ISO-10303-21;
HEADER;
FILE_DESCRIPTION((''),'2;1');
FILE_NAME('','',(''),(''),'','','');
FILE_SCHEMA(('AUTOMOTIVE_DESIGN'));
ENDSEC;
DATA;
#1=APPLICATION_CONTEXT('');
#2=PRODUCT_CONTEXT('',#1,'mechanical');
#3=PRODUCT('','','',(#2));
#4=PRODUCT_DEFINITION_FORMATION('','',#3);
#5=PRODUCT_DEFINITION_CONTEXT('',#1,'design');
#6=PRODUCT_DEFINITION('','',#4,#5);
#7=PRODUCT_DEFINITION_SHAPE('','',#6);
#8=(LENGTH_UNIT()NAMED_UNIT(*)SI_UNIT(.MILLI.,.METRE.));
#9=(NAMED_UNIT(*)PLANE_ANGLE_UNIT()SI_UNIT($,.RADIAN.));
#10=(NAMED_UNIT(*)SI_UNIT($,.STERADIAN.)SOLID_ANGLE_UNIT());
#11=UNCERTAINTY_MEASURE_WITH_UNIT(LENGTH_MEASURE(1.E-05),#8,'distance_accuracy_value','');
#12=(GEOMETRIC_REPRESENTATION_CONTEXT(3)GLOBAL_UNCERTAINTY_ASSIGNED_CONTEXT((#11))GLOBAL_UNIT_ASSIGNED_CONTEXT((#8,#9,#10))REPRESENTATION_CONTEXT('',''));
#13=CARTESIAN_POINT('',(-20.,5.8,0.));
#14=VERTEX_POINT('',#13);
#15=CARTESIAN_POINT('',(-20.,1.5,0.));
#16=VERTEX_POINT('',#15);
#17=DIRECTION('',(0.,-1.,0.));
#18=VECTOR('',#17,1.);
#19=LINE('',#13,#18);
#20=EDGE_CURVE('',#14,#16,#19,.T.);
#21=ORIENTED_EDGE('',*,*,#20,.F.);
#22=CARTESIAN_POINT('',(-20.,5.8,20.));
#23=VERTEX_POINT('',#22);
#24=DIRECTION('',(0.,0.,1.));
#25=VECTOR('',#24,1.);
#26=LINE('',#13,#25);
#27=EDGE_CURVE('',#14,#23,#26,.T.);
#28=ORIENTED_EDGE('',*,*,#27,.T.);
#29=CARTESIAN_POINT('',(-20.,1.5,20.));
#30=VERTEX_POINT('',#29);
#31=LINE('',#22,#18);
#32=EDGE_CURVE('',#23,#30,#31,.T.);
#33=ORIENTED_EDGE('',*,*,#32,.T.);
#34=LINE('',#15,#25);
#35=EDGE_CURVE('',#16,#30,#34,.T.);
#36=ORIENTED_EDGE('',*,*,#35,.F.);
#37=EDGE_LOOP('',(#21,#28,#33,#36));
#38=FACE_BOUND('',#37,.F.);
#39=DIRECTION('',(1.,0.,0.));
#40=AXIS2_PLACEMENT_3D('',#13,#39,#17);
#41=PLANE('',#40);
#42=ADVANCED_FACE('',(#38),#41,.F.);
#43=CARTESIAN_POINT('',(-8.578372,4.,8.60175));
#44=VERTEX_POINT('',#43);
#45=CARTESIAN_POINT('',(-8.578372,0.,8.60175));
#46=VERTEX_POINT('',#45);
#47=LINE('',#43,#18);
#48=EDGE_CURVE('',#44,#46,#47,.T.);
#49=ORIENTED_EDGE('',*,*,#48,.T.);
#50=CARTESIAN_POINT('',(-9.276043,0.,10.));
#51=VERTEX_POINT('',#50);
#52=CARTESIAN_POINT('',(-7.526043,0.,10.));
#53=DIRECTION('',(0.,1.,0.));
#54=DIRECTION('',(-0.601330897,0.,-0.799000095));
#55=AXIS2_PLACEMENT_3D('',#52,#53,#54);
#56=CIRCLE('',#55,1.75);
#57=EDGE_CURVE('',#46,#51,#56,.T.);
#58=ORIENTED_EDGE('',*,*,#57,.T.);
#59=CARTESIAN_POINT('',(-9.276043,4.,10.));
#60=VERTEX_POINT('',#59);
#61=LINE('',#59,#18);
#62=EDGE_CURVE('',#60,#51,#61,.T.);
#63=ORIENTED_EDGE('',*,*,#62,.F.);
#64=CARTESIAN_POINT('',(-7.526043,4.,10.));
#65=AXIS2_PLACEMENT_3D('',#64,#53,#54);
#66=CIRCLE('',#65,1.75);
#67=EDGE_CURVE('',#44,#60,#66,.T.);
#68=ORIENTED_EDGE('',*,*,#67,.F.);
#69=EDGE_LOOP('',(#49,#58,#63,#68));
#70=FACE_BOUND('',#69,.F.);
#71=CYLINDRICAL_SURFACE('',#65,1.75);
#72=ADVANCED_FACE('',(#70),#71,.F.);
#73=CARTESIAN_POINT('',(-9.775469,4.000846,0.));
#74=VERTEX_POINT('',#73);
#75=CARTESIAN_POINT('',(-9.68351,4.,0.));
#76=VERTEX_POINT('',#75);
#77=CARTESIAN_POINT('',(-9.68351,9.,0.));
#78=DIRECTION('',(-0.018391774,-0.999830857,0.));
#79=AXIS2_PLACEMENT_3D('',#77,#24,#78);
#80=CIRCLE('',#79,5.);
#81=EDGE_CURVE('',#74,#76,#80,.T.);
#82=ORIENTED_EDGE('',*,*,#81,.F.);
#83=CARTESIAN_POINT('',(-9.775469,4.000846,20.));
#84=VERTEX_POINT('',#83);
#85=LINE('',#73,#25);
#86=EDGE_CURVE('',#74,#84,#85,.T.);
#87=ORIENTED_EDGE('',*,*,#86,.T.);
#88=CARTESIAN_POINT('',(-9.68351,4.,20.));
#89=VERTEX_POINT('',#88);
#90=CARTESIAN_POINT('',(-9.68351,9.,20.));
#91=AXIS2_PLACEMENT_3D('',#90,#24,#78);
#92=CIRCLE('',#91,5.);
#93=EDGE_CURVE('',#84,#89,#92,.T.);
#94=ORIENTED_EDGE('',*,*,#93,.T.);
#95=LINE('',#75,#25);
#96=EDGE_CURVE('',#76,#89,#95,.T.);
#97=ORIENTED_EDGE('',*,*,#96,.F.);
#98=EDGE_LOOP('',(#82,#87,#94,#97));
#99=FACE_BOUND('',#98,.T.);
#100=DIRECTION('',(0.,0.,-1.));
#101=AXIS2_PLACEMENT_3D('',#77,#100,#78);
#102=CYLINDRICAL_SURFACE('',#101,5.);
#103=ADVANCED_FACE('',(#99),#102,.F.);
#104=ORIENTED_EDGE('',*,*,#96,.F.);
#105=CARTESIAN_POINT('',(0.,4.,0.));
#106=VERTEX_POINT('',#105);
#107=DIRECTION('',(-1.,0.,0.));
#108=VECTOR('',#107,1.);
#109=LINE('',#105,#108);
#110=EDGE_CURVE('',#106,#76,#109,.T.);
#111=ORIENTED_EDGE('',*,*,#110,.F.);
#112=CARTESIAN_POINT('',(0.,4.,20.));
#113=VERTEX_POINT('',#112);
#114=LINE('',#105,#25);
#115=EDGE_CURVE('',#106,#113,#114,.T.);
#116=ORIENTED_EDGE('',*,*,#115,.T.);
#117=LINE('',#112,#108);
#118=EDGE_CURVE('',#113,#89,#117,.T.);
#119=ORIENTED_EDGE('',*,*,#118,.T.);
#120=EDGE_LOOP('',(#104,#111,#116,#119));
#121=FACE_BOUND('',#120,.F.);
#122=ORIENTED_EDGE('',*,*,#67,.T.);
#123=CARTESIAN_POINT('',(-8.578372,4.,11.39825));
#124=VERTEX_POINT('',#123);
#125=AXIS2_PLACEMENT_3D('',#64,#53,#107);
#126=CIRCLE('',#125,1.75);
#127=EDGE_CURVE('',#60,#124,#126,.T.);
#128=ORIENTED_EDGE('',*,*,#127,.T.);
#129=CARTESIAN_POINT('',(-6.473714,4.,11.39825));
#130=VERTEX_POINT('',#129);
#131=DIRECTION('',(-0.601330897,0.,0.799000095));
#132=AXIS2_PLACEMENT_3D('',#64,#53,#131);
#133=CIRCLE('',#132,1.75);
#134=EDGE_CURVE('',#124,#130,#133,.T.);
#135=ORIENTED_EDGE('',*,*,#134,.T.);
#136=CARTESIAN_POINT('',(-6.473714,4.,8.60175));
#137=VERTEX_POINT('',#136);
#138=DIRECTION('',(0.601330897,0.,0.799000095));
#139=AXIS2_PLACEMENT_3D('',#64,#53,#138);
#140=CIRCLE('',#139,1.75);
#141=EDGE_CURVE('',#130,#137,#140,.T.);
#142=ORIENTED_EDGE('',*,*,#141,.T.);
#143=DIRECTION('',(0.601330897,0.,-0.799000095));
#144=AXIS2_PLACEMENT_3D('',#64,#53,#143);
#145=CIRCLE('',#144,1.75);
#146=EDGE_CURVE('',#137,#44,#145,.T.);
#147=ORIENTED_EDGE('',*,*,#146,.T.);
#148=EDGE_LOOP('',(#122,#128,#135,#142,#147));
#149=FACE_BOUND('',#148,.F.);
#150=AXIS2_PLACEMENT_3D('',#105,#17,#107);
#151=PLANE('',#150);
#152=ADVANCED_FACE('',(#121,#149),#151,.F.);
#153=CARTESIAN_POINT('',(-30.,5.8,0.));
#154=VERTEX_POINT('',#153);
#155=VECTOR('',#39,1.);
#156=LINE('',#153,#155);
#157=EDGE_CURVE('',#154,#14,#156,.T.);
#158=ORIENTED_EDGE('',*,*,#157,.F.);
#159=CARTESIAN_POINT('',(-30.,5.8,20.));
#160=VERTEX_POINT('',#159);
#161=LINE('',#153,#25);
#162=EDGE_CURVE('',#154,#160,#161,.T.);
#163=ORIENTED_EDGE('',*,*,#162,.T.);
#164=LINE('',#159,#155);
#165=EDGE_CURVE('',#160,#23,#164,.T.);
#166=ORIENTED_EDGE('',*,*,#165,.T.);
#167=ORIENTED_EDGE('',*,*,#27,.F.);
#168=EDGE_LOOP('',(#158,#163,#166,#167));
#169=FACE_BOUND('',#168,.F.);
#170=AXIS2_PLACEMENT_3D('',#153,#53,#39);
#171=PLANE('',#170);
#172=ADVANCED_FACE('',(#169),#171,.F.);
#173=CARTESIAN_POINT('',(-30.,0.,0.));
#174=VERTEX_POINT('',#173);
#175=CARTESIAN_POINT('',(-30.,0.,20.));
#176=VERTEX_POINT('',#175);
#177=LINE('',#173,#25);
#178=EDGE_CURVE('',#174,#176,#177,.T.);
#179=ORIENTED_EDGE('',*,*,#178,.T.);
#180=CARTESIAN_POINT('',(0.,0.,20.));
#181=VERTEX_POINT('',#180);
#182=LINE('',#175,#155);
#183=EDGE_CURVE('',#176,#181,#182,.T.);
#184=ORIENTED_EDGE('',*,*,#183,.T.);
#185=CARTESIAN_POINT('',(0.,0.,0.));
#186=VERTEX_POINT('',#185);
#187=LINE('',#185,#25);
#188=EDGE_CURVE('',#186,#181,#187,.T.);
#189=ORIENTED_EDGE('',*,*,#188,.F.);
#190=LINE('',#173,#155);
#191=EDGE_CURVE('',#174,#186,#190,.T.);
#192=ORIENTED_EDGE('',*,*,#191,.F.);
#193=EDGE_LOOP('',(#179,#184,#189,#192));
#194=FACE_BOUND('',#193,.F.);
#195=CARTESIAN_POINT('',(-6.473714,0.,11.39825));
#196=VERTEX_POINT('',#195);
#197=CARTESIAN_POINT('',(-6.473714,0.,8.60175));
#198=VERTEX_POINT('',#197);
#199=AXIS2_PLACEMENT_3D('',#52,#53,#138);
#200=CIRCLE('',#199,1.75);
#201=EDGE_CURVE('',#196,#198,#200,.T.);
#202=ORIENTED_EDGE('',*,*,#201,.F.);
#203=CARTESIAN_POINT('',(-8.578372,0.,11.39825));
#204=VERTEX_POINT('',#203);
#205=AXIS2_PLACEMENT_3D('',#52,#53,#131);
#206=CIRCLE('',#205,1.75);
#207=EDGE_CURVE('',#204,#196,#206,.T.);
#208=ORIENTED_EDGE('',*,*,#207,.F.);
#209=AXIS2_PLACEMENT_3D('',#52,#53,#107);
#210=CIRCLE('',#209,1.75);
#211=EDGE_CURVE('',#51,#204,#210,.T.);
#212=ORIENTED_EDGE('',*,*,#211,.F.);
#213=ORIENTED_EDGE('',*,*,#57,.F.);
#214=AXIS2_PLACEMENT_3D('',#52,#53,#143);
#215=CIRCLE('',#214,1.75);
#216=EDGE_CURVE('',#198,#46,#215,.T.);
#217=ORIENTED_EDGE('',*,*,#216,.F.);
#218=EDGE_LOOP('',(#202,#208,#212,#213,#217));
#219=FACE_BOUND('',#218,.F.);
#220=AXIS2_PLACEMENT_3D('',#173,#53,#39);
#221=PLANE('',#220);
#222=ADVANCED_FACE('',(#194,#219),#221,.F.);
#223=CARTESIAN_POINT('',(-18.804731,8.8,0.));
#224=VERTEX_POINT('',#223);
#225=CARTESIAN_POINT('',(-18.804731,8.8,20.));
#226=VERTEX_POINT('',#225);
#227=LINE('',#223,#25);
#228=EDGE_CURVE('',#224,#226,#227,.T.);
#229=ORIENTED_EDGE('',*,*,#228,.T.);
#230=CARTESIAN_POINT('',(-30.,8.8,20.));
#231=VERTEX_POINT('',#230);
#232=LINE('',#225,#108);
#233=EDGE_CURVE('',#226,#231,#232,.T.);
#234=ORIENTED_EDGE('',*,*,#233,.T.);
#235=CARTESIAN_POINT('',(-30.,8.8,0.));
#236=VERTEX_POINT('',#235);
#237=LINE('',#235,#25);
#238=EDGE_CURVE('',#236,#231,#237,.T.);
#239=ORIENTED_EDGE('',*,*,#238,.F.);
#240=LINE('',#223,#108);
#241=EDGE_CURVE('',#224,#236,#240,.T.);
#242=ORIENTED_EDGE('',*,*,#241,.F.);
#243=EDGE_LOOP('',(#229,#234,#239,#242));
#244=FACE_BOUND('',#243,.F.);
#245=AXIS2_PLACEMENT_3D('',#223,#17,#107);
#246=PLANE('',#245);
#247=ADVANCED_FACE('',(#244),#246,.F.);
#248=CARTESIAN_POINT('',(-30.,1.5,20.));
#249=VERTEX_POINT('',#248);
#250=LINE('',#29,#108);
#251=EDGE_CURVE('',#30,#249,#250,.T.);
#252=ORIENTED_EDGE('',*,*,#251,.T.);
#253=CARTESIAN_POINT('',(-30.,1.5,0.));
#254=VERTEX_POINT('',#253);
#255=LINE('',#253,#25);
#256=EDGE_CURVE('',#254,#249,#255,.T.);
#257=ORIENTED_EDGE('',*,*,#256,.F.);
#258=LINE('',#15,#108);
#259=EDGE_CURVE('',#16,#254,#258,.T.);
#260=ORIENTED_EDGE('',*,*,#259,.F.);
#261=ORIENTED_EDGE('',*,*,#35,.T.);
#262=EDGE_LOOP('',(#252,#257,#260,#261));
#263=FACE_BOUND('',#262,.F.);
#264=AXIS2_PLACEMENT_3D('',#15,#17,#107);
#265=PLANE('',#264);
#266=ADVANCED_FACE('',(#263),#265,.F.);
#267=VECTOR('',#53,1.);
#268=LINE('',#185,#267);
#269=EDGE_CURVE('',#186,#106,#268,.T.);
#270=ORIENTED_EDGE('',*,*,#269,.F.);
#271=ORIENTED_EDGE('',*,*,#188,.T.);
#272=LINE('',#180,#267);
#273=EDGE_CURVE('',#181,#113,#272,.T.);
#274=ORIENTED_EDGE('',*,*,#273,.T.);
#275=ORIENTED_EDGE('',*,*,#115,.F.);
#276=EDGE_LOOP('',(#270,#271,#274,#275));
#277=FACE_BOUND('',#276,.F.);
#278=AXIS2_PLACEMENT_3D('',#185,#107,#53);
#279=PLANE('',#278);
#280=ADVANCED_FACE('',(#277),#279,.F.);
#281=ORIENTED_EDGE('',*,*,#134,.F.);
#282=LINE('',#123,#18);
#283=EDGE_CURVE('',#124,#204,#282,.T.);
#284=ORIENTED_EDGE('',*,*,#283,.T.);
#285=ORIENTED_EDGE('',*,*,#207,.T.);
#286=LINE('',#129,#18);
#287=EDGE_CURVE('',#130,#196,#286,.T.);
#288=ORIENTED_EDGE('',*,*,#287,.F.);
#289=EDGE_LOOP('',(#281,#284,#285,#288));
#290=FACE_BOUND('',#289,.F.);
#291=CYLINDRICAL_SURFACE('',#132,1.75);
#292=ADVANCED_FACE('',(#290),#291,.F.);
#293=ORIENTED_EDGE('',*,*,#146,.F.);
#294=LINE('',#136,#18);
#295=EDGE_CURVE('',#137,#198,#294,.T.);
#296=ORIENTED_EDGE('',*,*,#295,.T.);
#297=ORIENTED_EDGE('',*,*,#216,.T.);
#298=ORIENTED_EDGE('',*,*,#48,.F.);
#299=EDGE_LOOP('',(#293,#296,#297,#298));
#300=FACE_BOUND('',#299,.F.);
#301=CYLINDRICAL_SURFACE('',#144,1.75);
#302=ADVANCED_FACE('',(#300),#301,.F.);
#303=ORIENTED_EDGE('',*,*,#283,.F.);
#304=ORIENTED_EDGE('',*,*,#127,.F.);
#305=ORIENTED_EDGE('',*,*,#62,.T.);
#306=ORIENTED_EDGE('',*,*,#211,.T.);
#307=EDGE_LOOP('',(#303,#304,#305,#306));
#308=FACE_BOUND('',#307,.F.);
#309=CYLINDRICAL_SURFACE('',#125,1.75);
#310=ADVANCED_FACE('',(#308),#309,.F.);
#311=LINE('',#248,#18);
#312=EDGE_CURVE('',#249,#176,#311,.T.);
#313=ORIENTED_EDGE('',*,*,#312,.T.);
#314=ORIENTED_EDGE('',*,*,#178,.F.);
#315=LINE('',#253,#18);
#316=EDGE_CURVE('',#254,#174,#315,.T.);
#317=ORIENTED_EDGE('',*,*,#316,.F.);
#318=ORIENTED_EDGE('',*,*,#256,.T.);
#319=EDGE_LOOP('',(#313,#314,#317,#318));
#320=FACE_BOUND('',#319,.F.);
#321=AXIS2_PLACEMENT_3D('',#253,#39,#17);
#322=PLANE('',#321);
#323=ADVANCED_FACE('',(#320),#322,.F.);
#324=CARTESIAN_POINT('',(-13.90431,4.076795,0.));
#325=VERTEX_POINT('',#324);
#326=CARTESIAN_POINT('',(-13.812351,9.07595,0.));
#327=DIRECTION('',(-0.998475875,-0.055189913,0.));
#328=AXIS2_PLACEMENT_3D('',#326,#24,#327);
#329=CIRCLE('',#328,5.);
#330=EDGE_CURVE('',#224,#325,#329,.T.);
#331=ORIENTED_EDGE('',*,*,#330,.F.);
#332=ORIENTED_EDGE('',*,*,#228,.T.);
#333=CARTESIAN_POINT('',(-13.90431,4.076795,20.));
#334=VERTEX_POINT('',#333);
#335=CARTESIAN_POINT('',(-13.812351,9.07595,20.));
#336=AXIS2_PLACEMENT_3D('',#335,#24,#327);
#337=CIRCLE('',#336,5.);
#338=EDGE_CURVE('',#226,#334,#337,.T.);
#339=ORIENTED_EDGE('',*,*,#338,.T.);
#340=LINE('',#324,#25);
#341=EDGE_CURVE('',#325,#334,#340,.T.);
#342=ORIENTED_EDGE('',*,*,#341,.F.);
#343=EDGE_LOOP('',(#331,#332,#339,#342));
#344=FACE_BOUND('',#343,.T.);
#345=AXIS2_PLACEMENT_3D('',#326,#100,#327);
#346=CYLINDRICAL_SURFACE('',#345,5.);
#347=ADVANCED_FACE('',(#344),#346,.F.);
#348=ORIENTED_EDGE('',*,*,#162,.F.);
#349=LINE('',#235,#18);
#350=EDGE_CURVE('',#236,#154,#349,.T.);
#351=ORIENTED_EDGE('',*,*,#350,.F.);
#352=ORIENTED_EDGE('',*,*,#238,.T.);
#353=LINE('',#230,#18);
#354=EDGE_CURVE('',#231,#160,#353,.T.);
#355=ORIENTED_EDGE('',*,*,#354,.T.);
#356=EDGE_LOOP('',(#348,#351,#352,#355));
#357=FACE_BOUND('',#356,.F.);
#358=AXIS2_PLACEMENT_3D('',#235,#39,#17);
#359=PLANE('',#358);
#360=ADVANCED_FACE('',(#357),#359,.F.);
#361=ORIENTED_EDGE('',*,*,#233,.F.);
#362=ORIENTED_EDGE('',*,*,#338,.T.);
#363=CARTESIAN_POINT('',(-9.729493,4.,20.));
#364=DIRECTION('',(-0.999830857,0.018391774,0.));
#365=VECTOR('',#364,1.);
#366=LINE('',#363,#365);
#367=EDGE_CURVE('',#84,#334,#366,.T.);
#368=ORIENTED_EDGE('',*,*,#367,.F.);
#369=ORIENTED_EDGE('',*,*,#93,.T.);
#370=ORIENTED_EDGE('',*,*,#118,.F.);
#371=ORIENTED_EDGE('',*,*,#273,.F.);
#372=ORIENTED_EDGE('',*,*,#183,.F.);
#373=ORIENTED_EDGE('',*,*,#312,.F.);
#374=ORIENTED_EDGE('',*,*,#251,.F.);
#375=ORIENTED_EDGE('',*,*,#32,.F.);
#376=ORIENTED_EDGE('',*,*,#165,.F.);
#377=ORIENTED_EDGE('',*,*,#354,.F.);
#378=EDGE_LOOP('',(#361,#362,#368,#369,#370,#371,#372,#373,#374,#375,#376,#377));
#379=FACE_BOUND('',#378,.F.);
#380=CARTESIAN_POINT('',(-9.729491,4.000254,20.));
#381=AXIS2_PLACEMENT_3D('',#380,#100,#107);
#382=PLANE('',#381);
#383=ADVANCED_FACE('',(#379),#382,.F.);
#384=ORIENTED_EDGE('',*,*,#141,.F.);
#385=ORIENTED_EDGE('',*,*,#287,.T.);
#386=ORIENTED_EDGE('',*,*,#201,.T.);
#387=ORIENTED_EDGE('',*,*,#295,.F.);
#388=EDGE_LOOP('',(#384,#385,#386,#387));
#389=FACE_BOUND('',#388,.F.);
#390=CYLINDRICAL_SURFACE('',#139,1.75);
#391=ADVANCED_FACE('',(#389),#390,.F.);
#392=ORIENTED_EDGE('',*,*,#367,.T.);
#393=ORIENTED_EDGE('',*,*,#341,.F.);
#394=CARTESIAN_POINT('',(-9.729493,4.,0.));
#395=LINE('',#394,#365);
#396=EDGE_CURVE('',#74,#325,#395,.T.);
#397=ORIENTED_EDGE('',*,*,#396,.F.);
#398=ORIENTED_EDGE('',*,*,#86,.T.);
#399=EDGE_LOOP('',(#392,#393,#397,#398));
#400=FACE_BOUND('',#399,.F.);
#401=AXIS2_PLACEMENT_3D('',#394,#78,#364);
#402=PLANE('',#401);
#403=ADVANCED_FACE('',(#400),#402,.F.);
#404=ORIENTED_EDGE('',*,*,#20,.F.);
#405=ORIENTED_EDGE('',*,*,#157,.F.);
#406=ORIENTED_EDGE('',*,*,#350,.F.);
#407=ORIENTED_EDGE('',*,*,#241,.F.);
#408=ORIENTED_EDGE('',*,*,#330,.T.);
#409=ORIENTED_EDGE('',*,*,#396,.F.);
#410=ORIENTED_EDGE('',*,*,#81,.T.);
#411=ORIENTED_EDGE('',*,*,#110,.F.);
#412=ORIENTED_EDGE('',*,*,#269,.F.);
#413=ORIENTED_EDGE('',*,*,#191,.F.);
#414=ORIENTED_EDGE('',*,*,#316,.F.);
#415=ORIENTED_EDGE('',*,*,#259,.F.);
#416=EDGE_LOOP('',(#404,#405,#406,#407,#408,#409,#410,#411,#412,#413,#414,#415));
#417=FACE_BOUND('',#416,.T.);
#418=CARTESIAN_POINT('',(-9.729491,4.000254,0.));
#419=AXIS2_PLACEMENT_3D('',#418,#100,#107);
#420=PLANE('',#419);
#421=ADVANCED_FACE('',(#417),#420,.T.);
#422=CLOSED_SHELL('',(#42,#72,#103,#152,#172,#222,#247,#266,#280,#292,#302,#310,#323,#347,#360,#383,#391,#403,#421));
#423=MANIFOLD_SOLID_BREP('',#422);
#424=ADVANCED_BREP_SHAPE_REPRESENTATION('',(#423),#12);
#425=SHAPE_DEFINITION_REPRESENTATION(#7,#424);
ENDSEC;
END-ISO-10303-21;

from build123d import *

# Parameters (mm, degrees)
F1_DEPTH    = 20
F2_T1_DEPTH = 20
F4_DEPTH    = 25


# Not quite as in the source:
# - a fillet or chamfer that OpenCascade refuses, or shapes differently, is made with other operations: its cross-section is extruded or revolved along the edge and cut away or added


with BuildPart() as f1:
    # F0 (on Top) → F1 (new body)
    with BuildSketch(Plane.XY):
        Polygon((-30, 0), (0, 0), (0, 1.4936865721), (0, 2.9873731442), (0, 4), (-9.7294932483, 4), (-18.8047308475, 4.1669379548), (-18.8047308475, 8.8), (-30, 8.8), (-30, 5.8), (-20, 5.8), (-20, 1.5), (-30, 1.5), align=None)
    extrude(amount=F1_DEPTH)

    # F2: fillet of radius 5 on 2 edges, made by hand

    # F2_s2 → F2_t1 (join)
    with BuildSketch(Plane.XY):
        with BuildLine():
            ThreePointArc((-9.7754687943, 4.0008457149), (-9.7294913038, 4.0002114332), (-9.6835099246, 4))
            Line((-9.6835099246, 4), (-9.7294932483, 4))
            Line((-9.7294932483, 4), (-9.7754687943, 4.0008457149))
        make_face()
        with BuildLine():
            ThreePointArc((-18.8047308475, 8.8), (-17.2821914607, 5.4759203381), (-13.904310341, 4.0767952816))
            Line((-13.904310341, 4.0767952816), (-18.8047308475, 4.1669379548))
            Line((-18.8047308475, 4.1669379548), (-18.8047308475, 8.8))
        make_face()
    extrude(amount=F2_T1_DEPTH)

    # F3 (on face) → F4 (cut)
    with BuildSketch(Plane(origin=(0, 4, 0), x_dir=(-1, 0, 0), z_dir=(0, 1, 0))):
        with BuildLine():
            Line((6.4737138013, 11.3982501667), (7.5260428712, 10))
            Line((7.5260428712, 10), (8.5783719411, 11.3982501667))
            ThreePointArc((8.5783719411, 11.3982501667), (7.5260428712, 11.75), (6.4737138013, 11.3982501667))
        make_face()
        with BuildLine():
            ThreePointArc((6.4737138013, 11.3982501667), (5.7760428712, 10), (6.4737138013, 8.6017498333))
            Line((6.4737138013, 8.6017498333), (7.5260428712, 10))
            Line((7.5260428712, 10), (6.4737138013, 11.3982501667))
        make_face()
        with BuildLine():
            Line((7.5260428712, 10), (6.4737138013, 8.6017498333))
            ThreePointArc((6.4737138013, 8.6017498333), (7.5260428712, 8.25), (8.5783719411, 8.6017498333))
            Line((8.5783719411, 8.6017498333), (7.5260428712, 10))
        make_face()
        with BuildLine():
            Line((8.5783719411, 11.3982501667), (7.5260428712, 10))
            Line((7.5260428712, 10), (8.5783719411, 8.6017498333))
            ThreePointArc((8.5783719411, 8.6017498333), (9.0919413149, 9.2186792823), (9.2760428712, 10))
            ThreePointArc((9.2760428712, 10), (9.0919413149, 10.7813207177), (8.5783719411, 11.3982501667))
        make_face()
    extrude(amount=-F4_DEPTH, mode=Mode.SUBTRACT)


solid = f1.part
